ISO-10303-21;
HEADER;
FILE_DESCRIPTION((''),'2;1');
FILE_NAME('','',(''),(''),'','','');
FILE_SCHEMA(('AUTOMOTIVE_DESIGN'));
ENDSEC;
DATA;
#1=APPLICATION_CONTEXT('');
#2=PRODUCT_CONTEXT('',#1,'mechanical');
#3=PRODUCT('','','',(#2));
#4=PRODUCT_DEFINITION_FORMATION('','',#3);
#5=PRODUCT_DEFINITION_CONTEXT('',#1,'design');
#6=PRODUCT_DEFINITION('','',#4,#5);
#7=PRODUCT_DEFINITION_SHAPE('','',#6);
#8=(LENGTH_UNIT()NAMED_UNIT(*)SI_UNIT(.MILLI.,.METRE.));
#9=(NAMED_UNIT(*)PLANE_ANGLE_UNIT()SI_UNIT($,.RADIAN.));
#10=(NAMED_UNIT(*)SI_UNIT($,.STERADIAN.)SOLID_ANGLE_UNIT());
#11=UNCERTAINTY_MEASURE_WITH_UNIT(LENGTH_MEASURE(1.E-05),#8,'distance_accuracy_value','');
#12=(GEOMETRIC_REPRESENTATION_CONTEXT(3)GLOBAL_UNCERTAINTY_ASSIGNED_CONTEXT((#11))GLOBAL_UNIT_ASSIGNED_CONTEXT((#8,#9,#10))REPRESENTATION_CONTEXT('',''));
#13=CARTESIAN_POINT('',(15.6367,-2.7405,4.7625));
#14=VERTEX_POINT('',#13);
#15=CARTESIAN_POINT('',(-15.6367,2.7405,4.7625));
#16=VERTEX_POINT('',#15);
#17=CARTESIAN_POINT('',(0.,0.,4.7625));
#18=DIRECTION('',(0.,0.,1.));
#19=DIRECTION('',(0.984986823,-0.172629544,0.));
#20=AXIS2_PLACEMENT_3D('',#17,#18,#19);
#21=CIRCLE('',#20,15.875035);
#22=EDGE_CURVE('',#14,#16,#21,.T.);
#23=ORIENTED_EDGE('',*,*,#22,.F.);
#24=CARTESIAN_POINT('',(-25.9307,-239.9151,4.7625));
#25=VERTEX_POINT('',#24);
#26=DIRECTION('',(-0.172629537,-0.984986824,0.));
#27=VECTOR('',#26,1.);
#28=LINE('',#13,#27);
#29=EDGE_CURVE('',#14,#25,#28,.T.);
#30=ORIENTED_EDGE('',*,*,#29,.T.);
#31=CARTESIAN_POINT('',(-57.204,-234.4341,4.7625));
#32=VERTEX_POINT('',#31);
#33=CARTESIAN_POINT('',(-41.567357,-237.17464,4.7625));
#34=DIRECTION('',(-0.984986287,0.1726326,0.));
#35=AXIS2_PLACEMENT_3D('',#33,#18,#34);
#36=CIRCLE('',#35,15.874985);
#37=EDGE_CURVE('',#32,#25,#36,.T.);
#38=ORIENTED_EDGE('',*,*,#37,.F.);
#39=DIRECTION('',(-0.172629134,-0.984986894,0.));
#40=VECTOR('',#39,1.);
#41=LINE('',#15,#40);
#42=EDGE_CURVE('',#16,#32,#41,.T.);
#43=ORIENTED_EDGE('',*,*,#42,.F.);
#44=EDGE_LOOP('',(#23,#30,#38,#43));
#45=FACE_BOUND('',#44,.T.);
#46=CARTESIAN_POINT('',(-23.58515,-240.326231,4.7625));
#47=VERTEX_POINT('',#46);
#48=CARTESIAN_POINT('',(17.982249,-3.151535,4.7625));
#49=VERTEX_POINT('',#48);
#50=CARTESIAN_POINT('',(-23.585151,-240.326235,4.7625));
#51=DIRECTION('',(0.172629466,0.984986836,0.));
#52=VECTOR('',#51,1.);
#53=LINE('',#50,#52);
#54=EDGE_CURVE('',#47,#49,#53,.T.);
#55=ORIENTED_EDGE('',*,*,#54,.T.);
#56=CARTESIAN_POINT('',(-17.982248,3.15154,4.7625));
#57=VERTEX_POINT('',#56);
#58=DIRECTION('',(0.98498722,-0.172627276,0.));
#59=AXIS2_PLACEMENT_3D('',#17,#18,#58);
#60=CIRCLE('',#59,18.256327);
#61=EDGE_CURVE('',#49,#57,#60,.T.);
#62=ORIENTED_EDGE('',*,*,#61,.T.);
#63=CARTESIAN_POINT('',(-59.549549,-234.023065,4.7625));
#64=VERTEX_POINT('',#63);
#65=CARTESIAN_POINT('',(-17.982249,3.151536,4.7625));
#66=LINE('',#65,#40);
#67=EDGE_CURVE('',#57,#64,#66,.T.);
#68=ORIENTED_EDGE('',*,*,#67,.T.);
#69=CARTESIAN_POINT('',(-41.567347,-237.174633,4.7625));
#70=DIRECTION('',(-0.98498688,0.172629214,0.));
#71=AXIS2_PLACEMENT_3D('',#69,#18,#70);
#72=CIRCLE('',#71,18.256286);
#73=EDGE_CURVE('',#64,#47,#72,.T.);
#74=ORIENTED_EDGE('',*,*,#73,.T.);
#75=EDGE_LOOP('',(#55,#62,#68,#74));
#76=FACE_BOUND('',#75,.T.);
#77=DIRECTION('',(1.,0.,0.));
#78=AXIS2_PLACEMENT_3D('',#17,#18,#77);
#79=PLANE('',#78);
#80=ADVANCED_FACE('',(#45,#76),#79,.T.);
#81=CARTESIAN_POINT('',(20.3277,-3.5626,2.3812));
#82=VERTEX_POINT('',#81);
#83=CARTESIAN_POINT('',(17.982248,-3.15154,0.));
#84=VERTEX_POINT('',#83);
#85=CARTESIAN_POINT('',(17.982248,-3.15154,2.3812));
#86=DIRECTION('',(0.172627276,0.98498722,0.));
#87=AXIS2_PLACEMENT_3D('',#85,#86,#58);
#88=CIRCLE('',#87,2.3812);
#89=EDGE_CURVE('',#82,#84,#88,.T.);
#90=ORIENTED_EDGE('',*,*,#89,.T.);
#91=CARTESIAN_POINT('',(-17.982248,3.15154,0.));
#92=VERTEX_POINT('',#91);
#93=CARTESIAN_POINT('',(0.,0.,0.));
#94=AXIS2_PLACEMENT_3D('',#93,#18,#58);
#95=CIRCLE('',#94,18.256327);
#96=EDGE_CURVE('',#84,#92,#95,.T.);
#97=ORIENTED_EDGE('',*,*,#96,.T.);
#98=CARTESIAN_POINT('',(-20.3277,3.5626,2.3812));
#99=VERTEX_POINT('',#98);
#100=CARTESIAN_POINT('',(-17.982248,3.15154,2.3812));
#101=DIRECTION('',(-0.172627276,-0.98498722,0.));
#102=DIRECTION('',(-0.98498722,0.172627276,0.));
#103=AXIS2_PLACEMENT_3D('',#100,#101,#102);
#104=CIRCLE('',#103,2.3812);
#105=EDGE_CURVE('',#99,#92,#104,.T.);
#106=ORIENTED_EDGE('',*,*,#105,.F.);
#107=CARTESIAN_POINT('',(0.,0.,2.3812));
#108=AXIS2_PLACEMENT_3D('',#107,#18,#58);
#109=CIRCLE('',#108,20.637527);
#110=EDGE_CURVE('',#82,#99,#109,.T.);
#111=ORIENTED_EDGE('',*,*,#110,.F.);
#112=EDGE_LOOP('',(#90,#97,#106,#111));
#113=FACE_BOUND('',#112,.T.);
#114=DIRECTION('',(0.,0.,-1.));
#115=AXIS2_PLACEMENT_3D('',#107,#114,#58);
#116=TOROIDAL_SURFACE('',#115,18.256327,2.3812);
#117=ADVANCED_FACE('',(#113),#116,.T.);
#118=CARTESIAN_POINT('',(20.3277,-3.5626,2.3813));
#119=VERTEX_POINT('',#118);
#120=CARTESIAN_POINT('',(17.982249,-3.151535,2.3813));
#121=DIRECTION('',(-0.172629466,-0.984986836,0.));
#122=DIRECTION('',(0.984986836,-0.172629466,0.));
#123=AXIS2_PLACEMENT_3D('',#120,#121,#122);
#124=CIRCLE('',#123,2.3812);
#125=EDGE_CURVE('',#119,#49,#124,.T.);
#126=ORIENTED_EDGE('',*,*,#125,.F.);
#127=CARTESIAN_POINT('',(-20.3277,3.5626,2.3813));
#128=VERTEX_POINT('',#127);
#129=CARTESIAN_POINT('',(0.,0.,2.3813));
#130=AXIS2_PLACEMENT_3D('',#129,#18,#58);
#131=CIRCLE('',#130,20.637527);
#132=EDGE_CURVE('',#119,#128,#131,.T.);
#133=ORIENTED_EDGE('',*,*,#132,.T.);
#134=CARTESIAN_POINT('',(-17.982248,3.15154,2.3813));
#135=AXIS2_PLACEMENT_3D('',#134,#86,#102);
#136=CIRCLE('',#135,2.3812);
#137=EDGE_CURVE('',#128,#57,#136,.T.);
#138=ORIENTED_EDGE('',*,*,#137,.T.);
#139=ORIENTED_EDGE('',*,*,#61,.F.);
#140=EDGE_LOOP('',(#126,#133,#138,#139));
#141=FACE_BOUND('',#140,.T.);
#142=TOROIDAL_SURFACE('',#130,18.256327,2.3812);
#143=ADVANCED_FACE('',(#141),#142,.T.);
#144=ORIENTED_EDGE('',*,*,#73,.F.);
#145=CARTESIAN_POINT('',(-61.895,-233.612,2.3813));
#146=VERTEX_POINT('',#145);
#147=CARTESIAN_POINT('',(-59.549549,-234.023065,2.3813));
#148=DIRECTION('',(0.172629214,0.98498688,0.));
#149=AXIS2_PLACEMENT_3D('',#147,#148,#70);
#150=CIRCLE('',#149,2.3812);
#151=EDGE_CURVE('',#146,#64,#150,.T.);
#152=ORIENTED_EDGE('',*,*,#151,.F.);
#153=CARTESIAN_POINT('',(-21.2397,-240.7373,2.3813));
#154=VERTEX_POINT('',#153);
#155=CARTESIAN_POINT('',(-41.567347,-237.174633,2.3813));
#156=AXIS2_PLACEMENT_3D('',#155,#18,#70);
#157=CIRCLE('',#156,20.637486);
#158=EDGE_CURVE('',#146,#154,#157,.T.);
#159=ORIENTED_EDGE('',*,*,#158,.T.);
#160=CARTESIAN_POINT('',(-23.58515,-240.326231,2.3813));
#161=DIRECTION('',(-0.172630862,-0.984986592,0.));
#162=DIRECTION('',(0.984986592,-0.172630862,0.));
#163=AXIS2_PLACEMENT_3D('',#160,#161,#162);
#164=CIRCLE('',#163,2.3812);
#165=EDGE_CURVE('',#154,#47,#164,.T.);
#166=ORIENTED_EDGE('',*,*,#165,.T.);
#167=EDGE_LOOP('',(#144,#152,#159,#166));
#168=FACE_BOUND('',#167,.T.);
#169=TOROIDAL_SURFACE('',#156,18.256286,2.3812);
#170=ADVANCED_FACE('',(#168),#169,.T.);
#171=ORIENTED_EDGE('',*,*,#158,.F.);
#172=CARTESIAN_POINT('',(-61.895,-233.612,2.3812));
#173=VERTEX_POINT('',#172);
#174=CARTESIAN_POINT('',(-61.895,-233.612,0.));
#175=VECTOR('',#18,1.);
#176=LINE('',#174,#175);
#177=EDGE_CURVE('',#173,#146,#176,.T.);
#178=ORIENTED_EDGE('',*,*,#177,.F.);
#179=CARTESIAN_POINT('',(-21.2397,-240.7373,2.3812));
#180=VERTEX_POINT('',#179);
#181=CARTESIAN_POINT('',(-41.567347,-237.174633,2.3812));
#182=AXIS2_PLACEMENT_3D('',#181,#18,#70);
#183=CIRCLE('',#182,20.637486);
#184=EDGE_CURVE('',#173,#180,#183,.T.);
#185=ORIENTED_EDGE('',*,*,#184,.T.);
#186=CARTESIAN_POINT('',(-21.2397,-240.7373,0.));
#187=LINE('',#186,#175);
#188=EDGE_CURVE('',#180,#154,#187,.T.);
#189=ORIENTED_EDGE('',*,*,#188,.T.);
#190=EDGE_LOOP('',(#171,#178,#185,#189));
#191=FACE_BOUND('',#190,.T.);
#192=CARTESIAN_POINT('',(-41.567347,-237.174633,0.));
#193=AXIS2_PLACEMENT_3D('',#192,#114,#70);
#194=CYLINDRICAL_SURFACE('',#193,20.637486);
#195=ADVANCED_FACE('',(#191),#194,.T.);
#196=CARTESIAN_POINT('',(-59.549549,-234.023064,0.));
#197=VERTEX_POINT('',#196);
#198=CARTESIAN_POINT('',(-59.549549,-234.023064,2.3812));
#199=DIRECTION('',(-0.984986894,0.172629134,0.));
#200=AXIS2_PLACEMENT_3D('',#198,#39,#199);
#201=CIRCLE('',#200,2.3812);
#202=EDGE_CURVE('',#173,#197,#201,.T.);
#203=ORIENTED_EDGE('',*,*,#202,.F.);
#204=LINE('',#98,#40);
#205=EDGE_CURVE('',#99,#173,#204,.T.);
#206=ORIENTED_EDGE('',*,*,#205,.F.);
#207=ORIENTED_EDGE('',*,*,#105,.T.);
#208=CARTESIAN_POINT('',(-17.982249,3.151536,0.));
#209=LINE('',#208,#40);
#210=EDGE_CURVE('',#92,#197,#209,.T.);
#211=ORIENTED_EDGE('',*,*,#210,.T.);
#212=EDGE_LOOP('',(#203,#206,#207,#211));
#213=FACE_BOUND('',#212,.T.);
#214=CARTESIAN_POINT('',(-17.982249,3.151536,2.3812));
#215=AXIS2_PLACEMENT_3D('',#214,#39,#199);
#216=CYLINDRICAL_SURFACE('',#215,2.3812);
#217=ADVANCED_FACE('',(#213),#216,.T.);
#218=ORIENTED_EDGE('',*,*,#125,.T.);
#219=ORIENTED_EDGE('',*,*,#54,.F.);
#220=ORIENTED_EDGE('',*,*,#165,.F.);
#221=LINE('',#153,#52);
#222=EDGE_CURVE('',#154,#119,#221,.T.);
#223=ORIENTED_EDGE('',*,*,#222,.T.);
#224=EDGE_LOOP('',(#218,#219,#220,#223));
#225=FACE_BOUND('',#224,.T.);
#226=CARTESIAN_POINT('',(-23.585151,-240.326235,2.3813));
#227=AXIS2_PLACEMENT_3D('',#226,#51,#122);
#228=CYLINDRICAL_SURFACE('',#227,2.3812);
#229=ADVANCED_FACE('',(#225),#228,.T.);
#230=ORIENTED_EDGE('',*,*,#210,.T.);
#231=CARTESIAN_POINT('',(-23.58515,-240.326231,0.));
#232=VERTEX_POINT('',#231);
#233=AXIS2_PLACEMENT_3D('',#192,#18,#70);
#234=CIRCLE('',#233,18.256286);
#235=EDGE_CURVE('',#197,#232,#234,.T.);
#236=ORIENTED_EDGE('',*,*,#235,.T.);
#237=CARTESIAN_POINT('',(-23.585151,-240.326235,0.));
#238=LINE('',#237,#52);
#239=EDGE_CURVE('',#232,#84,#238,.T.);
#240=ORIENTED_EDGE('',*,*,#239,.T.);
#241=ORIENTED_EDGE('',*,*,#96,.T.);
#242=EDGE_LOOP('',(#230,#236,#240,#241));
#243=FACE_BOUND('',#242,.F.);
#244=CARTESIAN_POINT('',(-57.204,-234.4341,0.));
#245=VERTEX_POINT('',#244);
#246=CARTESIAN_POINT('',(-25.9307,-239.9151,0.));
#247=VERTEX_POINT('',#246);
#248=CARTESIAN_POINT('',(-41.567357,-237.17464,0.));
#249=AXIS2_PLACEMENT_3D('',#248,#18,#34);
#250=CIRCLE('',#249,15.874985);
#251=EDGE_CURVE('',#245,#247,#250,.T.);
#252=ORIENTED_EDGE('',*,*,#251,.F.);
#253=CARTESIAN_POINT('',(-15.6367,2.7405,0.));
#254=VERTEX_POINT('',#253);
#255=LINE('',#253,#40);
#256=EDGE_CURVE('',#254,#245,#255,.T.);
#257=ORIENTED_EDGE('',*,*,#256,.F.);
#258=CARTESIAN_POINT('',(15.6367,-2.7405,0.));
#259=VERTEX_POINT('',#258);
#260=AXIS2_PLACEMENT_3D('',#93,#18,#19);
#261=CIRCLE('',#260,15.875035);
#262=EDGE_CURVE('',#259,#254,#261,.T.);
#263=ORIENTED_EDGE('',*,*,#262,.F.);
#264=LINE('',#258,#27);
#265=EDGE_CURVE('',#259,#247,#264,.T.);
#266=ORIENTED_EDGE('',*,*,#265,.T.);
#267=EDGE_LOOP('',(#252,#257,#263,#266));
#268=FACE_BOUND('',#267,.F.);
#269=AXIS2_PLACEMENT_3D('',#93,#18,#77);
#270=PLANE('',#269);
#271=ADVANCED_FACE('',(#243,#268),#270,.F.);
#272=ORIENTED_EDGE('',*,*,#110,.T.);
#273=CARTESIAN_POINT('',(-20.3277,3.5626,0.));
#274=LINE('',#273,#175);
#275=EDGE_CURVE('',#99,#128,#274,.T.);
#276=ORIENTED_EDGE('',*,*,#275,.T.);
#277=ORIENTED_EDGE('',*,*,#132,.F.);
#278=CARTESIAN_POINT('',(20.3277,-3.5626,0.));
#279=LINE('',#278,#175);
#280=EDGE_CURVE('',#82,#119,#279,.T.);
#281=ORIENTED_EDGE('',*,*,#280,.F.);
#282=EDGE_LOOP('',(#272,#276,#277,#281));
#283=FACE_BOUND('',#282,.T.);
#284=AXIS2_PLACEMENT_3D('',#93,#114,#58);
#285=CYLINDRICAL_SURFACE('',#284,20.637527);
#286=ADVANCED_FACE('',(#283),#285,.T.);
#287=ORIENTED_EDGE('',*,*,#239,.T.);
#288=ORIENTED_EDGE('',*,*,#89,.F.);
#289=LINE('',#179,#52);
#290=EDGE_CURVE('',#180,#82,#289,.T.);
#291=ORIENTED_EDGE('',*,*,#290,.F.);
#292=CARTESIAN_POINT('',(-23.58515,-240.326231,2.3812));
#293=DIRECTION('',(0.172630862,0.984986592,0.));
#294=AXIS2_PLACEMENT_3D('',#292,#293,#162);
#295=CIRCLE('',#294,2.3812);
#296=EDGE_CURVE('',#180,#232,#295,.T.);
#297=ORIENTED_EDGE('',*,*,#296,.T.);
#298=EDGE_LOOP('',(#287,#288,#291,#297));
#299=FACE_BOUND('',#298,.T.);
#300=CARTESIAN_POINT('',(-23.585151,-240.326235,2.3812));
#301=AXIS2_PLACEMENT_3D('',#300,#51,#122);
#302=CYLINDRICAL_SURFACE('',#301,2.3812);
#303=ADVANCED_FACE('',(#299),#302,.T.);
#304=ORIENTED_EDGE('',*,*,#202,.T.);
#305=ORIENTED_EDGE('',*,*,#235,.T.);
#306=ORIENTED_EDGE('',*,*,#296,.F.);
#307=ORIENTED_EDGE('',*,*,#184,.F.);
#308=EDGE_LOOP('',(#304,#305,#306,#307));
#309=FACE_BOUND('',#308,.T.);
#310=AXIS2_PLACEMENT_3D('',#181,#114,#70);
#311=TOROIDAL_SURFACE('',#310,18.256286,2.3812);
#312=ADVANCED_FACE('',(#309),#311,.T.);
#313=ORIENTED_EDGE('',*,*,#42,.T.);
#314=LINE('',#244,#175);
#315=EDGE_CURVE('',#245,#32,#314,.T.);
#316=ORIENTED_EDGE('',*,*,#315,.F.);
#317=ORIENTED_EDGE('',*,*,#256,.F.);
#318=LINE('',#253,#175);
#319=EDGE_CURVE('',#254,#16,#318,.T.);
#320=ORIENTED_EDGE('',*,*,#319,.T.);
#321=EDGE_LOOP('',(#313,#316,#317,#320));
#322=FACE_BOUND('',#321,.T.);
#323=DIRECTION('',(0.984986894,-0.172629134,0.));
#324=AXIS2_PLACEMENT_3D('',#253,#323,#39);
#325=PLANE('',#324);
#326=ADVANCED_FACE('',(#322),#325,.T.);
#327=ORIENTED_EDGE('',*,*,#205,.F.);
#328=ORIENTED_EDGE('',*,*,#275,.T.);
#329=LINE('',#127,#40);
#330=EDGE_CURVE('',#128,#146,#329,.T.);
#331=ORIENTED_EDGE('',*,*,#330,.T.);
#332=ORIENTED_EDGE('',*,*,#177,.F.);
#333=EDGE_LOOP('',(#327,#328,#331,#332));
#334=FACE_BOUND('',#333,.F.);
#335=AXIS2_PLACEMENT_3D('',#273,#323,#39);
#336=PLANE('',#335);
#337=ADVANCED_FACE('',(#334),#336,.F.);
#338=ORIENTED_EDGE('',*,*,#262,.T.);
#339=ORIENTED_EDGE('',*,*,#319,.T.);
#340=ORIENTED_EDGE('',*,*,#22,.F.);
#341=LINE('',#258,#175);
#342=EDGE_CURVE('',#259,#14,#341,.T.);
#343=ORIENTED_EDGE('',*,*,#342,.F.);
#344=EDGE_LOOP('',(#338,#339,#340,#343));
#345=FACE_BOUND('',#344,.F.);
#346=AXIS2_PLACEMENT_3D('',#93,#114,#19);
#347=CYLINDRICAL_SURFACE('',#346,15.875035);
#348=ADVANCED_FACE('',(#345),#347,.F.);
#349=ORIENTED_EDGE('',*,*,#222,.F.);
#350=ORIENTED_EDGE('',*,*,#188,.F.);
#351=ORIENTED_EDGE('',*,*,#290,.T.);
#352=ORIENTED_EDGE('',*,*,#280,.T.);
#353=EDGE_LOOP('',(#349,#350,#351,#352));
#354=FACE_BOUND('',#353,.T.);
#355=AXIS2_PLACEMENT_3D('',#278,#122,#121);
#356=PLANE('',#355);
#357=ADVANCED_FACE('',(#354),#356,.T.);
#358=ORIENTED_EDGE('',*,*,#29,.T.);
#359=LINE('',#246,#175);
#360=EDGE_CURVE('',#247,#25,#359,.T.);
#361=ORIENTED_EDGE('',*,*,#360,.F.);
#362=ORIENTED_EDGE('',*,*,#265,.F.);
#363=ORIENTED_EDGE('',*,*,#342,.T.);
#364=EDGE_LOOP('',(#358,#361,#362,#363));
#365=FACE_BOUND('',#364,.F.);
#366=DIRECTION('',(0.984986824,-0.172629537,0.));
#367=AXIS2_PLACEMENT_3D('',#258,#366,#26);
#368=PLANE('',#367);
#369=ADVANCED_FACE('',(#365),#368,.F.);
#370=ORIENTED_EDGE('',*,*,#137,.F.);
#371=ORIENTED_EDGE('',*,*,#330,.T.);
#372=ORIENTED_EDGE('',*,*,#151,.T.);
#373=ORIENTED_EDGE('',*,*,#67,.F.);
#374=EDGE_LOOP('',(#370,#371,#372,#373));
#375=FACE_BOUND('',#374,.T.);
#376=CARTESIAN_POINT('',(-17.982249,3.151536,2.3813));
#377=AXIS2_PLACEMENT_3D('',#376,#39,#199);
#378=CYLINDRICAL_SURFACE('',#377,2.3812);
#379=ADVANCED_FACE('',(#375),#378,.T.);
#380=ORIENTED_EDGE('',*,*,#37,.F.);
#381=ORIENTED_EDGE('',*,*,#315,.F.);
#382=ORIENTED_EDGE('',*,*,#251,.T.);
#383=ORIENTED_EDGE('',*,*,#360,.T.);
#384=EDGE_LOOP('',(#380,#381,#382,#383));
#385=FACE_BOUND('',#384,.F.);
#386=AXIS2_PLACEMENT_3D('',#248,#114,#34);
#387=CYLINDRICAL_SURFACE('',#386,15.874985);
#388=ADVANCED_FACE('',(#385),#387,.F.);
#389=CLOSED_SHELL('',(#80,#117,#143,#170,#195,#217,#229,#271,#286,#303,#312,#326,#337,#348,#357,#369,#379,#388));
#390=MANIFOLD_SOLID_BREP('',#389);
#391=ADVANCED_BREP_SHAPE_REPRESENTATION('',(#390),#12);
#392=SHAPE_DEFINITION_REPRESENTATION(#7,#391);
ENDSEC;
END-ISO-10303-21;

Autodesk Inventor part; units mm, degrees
ref_plane "YZ Plane" through (0, 0, 0) normal (1, 0, 0) x (0, 1, 0)
ref_plane "XZ Plane" through (0, 0, 0) normal (0, 1, 0) x (-1, 0, 0)
ref_plane "XY Plane" through (0, 0, 0) normal (0, 0, 1) x (1, 0, 0)
sketch "Sketch1" plane through (0, 0, 0) normal (0, 0, 1) x (1, 0, 0)
  arc A0 (15.6367, -2.7405) -> (-15.6367, 2.7405) centre (0, 0) ccw
  arc A1 (20.3277, -3.5626) -> (-20.3277, 3.5626) centre (0, 0) ccw
  arc A2 (-57.204, -234.4341) -> (-25.9307, -239.9151) centre (-41.5673, -237.1746) ccw
  arc A3 (-61.895, -233.612) -> (-21.2397, -240.7373) centre (-41.5673, -237.1746) ccw
  line L0 (20.3277, -3.5626) -> (-21.2397, -240.7373)
  line L1 (15.6367, -2.7405) -> (-25.9307, -239.9151)
  line L2 (-15.6367, 2.7405) -> (-57.204, -234.4341)
  line L3 (-20.3277, 3.5626) -> (-61.895, -233.612)
  dimension "d0" = 15.875
  dimension "d1" = 4.7625
extrude "Extrusion1" add sketch "Sketch1" along normal blind 4.7625
fillet "Fillet1" radius 2.3813 8 edges at (-45.13, -257.5023, 4.7625) (-41.1113, -115.0247, 4.7625) (3.5626, 20.3277, 4.7625) (-0.456, -122.1499, 4.7625) (3.5626, 20.3277, 0) (-41.1113, -115.0247, 0) (-45.13, -257.5023, 0) (-0.456, -122.1499, 0)
properties part number "Belt_Vertical_Short" material "Polypropylene"
